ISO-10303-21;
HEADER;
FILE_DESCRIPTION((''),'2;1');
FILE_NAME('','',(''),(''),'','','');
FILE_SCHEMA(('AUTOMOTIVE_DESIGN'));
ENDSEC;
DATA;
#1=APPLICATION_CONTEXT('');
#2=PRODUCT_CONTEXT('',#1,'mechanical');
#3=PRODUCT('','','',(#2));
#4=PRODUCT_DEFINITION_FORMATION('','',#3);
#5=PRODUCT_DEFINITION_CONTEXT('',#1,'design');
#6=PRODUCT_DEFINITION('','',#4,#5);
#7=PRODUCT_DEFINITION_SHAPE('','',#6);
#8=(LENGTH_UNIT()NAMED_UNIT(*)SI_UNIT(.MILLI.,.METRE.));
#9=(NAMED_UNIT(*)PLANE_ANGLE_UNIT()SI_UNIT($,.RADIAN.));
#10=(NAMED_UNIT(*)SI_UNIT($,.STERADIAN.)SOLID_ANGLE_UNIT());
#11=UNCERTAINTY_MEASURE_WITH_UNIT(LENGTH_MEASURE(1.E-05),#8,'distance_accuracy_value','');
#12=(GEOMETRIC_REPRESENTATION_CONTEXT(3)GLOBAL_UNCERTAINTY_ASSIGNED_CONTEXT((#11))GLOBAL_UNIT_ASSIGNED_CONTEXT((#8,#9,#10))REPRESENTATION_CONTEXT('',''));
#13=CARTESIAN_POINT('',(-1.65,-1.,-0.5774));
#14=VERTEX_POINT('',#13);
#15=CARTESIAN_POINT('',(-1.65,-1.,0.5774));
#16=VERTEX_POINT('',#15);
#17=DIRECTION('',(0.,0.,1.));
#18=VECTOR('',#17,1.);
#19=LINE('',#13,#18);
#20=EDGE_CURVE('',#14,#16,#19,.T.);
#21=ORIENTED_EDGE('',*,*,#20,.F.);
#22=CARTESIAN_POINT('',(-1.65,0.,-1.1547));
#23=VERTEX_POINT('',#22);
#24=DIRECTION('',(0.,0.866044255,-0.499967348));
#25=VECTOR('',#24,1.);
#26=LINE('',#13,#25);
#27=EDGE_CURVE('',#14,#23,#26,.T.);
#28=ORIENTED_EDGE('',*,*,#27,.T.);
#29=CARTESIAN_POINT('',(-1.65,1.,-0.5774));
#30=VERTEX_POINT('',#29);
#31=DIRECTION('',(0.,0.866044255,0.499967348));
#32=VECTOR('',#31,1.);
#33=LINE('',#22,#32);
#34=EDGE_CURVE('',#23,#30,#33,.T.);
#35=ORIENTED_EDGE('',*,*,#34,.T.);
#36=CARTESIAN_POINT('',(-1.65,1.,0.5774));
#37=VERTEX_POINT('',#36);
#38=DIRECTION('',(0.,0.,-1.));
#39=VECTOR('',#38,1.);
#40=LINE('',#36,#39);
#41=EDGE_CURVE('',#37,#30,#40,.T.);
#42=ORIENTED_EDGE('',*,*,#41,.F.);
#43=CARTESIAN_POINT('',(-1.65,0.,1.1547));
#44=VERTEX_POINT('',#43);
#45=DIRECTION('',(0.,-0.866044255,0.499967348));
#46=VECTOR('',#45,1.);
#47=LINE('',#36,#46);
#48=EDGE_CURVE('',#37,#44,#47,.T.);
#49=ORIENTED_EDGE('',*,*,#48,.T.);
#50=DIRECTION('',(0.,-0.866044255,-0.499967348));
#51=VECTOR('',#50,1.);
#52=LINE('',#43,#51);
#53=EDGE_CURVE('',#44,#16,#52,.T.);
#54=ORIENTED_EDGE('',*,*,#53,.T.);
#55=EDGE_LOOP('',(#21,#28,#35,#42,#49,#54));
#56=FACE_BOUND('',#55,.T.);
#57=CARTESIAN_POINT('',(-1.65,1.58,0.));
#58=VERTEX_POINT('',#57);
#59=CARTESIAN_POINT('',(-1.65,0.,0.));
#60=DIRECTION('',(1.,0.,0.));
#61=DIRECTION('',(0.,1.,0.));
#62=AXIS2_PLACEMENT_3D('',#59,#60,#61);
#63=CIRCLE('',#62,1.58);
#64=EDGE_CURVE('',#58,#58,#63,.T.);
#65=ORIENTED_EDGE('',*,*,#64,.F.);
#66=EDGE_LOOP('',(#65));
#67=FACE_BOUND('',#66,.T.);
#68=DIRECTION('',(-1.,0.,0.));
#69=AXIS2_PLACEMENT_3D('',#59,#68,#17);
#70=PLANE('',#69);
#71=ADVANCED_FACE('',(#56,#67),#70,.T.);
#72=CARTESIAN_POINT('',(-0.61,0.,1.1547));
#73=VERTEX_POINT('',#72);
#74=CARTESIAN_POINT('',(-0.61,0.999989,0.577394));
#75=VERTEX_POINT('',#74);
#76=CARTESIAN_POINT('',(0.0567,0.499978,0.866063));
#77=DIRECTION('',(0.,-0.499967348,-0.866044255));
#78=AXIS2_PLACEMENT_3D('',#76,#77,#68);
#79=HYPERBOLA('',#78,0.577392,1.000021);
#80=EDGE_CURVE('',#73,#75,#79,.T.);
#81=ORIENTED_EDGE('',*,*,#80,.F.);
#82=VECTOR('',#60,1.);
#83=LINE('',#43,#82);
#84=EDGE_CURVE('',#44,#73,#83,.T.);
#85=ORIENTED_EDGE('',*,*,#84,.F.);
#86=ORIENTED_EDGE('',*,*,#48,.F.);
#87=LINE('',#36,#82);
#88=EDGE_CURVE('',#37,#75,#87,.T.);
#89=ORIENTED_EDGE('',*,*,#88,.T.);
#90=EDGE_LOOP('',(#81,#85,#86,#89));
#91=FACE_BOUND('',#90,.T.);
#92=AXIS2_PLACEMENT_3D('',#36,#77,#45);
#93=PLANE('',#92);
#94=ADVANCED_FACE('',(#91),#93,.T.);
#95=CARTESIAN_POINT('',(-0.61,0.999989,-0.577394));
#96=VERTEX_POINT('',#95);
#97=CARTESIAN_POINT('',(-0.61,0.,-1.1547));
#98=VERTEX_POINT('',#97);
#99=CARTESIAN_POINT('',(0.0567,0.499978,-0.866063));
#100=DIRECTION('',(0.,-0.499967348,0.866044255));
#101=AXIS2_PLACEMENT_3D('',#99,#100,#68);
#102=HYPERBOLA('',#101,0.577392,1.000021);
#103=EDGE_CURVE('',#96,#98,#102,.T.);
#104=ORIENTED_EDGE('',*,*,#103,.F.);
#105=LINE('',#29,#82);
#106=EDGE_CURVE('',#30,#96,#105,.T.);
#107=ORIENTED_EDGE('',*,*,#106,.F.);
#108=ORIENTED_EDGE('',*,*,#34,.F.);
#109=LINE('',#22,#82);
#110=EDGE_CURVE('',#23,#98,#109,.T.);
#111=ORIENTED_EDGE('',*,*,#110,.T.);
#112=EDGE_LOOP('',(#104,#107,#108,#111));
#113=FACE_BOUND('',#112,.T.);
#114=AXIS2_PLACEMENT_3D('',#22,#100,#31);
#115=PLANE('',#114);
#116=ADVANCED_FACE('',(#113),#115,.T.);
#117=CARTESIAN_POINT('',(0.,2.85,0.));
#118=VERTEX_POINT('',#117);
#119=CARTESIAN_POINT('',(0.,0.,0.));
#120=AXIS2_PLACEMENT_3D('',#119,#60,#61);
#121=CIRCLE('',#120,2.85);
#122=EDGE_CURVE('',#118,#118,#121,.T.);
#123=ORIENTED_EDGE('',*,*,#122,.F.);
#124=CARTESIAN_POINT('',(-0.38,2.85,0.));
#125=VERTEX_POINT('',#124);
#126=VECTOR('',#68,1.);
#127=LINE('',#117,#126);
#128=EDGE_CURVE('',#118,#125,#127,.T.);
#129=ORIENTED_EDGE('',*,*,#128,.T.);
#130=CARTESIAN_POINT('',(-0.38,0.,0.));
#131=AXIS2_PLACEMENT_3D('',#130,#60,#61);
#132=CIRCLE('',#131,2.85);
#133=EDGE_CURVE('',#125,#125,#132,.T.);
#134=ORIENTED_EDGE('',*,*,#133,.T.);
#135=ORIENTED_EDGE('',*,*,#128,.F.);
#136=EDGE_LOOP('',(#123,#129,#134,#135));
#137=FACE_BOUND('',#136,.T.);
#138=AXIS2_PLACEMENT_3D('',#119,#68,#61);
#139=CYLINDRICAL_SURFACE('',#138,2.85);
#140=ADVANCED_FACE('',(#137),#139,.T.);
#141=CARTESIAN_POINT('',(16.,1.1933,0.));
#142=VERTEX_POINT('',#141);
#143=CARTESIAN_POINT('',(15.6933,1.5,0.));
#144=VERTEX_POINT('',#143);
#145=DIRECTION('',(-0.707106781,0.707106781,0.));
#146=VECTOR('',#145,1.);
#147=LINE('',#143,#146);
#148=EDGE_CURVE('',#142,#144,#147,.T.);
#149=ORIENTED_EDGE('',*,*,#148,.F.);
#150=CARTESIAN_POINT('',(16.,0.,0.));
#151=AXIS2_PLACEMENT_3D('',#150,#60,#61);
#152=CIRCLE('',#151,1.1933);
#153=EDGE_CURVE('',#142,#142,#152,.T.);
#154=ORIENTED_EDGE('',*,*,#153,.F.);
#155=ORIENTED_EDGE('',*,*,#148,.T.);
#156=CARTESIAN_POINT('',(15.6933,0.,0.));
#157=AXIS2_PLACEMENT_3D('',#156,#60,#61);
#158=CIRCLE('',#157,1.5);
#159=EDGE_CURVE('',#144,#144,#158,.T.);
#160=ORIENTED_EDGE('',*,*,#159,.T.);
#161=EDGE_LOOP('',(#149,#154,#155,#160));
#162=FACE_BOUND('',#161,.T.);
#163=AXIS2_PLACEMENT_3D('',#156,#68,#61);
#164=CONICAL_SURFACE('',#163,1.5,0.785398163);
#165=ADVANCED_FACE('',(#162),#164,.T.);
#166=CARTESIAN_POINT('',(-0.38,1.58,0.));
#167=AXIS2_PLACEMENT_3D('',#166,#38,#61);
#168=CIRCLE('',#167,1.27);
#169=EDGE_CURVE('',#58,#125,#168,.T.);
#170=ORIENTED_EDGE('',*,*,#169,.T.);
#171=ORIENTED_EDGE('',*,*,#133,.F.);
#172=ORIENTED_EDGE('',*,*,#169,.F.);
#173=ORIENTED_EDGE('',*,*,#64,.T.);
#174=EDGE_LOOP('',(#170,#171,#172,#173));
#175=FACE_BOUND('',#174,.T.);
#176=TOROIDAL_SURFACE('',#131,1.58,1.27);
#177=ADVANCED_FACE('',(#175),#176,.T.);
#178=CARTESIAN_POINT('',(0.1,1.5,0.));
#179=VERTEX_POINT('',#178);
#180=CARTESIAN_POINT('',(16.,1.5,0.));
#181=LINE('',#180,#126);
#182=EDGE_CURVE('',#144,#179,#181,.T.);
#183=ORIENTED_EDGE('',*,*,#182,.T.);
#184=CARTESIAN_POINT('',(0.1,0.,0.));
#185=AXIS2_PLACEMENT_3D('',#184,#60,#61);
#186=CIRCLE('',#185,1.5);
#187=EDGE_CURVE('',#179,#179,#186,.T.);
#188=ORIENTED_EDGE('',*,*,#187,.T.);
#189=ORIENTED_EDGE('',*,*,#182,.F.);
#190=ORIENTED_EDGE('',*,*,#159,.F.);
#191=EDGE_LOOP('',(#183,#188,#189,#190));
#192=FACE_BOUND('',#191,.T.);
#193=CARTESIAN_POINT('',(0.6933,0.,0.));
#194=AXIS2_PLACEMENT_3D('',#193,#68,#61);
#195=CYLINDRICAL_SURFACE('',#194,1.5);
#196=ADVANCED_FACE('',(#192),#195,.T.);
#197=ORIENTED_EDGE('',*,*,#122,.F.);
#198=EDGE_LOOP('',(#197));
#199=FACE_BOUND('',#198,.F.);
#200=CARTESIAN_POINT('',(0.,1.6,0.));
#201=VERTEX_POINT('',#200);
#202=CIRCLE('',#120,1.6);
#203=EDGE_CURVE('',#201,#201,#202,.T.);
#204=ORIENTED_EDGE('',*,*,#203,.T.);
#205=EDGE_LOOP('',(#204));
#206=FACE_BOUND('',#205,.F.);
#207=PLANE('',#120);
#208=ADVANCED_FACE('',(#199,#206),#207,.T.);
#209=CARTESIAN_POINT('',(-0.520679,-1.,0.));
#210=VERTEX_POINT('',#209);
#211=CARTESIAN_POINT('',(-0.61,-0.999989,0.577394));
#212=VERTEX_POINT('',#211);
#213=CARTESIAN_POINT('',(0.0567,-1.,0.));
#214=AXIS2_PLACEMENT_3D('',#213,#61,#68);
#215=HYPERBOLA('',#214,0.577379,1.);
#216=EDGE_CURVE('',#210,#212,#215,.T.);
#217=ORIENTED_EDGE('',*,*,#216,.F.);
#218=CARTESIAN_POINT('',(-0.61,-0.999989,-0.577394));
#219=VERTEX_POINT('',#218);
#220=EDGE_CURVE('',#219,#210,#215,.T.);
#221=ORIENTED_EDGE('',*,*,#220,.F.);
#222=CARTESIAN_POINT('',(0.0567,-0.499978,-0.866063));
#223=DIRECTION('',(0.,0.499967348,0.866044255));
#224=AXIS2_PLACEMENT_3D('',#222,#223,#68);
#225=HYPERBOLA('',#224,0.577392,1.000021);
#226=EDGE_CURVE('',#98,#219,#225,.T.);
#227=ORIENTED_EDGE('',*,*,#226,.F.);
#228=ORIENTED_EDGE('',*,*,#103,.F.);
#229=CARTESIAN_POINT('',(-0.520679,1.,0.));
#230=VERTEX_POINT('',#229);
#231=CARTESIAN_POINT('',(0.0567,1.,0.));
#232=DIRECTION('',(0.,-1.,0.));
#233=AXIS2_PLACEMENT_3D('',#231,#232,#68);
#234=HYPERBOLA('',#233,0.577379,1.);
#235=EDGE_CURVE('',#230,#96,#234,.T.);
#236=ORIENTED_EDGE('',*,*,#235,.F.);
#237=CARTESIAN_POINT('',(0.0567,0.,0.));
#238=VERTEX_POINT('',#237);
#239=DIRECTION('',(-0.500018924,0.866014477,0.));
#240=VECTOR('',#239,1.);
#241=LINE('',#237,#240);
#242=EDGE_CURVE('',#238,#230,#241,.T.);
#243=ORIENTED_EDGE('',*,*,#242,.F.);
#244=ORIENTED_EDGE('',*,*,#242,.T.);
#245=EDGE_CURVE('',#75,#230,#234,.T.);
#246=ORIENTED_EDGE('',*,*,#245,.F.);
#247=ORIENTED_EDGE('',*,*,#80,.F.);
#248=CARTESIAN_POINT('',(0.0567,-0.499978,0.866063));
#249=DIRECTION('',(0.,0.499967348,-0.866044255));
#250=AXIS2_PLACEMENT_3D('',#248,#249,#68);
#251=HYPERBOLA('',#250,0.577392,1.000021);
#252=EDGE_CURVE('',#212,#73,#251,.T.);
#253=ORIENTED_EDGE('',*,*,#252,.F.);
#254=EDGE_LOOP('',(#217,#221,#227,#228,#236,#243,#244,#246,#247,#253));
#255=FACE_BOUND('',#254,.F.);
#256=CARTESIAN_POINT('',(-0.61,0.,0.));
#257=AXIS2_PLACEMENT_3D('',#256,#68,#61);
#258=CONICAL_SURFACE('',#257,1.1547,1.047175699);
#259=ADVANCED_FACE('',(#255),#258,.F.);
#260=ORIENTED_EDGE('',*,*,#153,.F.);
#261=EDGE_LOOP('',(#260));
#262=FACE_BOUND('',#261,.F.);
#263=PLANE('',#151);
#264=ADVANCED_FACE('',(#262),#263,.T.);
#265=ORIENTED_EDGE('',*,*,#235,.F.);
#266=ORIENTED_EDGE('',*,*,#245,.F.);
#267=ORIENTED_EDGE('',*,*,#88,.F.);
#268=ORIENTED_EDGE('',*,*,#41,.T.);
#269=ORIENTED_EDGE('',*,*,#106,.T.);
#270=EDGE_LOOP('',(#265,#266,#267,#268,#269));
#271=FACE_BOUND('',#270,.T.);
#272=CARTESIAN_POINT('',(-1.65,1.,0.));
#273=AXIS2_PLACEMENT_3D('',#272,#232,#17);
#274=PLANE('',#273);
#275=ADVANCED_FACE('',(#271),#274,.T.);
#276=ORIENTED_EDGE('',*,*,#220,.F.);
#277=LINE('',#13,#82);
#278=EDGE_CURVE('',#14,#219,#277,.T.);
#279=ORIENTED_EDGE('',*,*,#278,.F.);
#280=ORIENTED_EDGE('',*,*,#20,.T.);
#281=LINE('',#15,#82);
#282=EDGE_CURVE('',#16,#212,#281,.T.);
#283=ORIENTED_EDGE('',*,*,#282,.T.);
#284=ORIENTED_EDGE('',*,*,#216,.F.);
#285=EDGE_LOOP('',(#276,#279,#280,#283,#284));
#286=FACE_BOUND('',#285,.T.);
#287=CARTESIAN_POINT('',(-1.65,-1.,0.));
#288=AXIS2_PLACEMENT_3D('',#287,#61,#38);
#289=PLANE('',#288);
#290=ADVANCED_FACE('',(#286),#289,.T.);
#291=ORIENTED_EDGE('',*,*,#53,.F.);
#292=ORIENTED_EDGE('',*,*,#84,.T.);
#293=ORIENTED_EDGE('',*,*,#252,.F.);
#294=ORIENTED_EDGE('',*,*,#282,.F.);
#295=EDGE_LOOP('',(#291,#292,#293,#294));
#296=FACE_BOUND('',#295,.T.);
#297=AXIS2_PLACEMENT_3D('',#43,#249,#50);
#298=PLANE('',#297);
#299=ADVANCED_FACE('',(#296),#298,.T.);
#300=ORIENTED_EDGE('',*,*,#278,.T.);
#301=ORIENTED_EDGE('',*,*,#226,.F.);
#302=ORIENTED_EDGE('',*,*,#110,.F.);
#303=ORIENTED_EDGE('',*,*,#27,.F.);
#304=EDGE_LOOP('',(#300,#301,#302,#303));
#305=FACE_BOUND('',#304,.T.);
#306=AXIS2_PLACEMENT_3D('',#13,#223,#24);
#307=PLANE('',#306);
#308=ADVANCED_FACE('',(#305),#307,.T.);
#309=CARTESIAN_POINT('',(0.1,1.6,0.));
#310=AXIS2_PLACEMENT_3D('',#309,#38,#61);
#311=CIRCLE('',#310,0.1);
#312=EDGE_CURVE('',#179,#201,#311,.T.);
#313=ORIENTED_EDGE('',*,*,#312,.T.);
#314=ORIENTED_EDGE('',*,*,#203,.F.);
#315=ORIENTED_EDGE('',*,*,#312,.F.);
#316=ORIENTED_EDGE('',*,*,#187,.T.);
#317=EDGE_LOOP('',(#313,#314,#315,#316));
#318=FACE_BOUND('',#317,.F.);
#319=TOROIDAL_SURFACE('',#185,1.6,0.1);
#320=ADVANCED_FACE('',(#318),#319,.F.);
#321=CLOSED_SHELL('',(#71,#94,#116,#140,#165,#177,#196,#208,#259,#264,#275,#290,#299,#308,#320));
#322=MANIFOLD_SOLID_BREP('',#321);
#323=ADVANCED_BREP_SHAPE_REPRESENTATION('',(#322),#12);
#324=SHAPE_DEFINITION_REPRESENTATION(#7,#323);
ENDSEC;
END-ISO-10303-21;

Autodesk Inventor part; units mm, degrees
ref_plane "YZ Plane" through (0, 0, 0) normal (1, 0, 0) x (0, 1, 0)
ref_plane "XZ Plane" through (0, 0, 0) normal (0, 1, 0) x (-1, 0, 0)
sketch "Skizze1" plane through (0, 0, 0) normal (0, 0, 1) x (1, 0, 0)
  line L0 (0.0567, 0) -> (16, 0)
  line L1 (16, 0) -> (16, 1.5)
  line L2 (16, 1.5) -> (1, 1.5)
  line L3 (1, 1.5) -> (0.6933, 1.5)
  line L4 (0.6933, 1.5) -> (0, 1.5)
  line L5 (0, 1.5) -> (0, 2.85)
  line L6 (0, 2.85) -> (-1.65, 2.85)
  line L7 (-1.65, 2.85) -> (-1.65, 1.1547)
  line L8 (-1.65, 1.1547) -> (-0.61, 1.1547)
  line L9 (-0.61, 1.1547) -> (0.0567, 0)
  line L10 (-5.18, 0) -> (19.53, 0) projected
  line L11 (0, -0.57) -> (0, 3.42) projected
  line L12 (1, 1.5) -> (0, 1.5) construction
  dimension "d0" = 15
  dimension "d1" = 0.3067
  dimension "d2" = 1.65
  dimension "d3" = 1.04
  dimension "d4" = 60
  dimension "d5" = 3
  dimension "d6" = 3
  dimension "d7" = 2.3094
  dimension "d8" = 5.7
  dimension "d19" = 16
revolve "Körper" add sketch "Skizze1" angle 360 about axis through (0.0567, 0, 0) along (1, 0, 0) contours L9 L11 L4 L3 L2 L1 L0 | L9 L8 L7 L6 L5 L11
sketch "Skizze2" plane through (-1.65, 0, 0) normal (-1, 0, 0) x (0, 0, 1)
  circle A0 centre (0, 0) radius 1.1547 projected
  line L0 (0, -3.99) -> (0, 3.99) projected
  line L1 (-3.99, 0) -> (3.99, 0) projected
  line L2 (1.1547, 0) -> (0.5774, -1)
  line L3 (0.5774, -1) -> (-0.5774, -1)
  line L4 (-0.5774, -1) -> (-1.1547, 0)
  line L5 (-1.1547, 0) -> (-0.5774, 1)
  line L6 (-0.5774, 1) -> (0.5774, 1)
  line L7 (0.5774, 1) -> (1.1547, 0)
extrude "Loch" add sketch "Skizze2" against normal up to next contours L7 A0 | A0 L2 | L6 L0 A0 | A0 L0 L3 | L0 L6 A0 | A0 L3 L0 | L4 A0 | A0 L5
fillet "Rundung1" radius 1.27 1 edges at (-1.65, -2.85, 0)
thread "Gewinde" size "M3x0.5" class "4g6g" standard "ANSI Metric M Profile" length 15
chamfer "Fase1" distance 0.3067 distance2 0.3067 1 edges at (16, -1.5, 0) measured on face at (16, -0.4645, -0.4115)
fillet "Rundung2" radius 0.1 1 edges at (0, -1.5, 0)
ref_plane "Work Plane1" through (30, 0, 0) normal (0, -0.5, 0.8660254) x (1, 0, 0)
equation "\"d0\" = GEL"
equation "\"d1\" = GAL"
equation "\"d2\" = KOH"
equation "\"d3\" = INTI"
equation "\"d5\" = GD"
equation "\"d6\" = BDM"
equation "\"d7\" = 1.1547 * SW"
equation "\"d8\" = KOD"
equation "\"d19\" = NLG"
equation "\"d16\" = RR"
equation "\"d12\" = GEL"
equation "\"d14\" = -0.5 * SPD + 0.5 * GD"
equation "\"d15\" = GUL"
equation "\"d29\" = R"
equation "\"GD\" = NND"
equation "\"NLG\" = 16"
equation "\"GEL\" = 15"
equation "\"KOD\" = 5.7"
equation "\"KOH\" = 1.65"
equation "\"INTI\" = 1.04"
equation "\"GAL\" = 0.61345 * PTC"
equation "\"GUL\" = 0.61345 * PTC"
equation "\"BDM\" = NND"
equation "\"SW\" = 2"
equation "\"RR\" = 1.27"
equation "\"SPD\" = 2.38655"
equation "\"d28\" = R"
equation "\"R\" = 0.1"
equation "\"TOA\" = 30deg"
equation "\"THREADDIA\" = 3"
equation "\"KOD1\" = KOD - 2 * RR"
equation "\"PTC\" = 0.5"
equation "\"NND\" = 3"
equation "\"E0\" = 1.155 * SW"
equation "\"GD1\" = THREADDIA - 1.2269 * PTC"
properties part number "ANSI B18.3.4M - M3 x 0.5 x 16, FHSBHCSM" material "Steel, Mild"
